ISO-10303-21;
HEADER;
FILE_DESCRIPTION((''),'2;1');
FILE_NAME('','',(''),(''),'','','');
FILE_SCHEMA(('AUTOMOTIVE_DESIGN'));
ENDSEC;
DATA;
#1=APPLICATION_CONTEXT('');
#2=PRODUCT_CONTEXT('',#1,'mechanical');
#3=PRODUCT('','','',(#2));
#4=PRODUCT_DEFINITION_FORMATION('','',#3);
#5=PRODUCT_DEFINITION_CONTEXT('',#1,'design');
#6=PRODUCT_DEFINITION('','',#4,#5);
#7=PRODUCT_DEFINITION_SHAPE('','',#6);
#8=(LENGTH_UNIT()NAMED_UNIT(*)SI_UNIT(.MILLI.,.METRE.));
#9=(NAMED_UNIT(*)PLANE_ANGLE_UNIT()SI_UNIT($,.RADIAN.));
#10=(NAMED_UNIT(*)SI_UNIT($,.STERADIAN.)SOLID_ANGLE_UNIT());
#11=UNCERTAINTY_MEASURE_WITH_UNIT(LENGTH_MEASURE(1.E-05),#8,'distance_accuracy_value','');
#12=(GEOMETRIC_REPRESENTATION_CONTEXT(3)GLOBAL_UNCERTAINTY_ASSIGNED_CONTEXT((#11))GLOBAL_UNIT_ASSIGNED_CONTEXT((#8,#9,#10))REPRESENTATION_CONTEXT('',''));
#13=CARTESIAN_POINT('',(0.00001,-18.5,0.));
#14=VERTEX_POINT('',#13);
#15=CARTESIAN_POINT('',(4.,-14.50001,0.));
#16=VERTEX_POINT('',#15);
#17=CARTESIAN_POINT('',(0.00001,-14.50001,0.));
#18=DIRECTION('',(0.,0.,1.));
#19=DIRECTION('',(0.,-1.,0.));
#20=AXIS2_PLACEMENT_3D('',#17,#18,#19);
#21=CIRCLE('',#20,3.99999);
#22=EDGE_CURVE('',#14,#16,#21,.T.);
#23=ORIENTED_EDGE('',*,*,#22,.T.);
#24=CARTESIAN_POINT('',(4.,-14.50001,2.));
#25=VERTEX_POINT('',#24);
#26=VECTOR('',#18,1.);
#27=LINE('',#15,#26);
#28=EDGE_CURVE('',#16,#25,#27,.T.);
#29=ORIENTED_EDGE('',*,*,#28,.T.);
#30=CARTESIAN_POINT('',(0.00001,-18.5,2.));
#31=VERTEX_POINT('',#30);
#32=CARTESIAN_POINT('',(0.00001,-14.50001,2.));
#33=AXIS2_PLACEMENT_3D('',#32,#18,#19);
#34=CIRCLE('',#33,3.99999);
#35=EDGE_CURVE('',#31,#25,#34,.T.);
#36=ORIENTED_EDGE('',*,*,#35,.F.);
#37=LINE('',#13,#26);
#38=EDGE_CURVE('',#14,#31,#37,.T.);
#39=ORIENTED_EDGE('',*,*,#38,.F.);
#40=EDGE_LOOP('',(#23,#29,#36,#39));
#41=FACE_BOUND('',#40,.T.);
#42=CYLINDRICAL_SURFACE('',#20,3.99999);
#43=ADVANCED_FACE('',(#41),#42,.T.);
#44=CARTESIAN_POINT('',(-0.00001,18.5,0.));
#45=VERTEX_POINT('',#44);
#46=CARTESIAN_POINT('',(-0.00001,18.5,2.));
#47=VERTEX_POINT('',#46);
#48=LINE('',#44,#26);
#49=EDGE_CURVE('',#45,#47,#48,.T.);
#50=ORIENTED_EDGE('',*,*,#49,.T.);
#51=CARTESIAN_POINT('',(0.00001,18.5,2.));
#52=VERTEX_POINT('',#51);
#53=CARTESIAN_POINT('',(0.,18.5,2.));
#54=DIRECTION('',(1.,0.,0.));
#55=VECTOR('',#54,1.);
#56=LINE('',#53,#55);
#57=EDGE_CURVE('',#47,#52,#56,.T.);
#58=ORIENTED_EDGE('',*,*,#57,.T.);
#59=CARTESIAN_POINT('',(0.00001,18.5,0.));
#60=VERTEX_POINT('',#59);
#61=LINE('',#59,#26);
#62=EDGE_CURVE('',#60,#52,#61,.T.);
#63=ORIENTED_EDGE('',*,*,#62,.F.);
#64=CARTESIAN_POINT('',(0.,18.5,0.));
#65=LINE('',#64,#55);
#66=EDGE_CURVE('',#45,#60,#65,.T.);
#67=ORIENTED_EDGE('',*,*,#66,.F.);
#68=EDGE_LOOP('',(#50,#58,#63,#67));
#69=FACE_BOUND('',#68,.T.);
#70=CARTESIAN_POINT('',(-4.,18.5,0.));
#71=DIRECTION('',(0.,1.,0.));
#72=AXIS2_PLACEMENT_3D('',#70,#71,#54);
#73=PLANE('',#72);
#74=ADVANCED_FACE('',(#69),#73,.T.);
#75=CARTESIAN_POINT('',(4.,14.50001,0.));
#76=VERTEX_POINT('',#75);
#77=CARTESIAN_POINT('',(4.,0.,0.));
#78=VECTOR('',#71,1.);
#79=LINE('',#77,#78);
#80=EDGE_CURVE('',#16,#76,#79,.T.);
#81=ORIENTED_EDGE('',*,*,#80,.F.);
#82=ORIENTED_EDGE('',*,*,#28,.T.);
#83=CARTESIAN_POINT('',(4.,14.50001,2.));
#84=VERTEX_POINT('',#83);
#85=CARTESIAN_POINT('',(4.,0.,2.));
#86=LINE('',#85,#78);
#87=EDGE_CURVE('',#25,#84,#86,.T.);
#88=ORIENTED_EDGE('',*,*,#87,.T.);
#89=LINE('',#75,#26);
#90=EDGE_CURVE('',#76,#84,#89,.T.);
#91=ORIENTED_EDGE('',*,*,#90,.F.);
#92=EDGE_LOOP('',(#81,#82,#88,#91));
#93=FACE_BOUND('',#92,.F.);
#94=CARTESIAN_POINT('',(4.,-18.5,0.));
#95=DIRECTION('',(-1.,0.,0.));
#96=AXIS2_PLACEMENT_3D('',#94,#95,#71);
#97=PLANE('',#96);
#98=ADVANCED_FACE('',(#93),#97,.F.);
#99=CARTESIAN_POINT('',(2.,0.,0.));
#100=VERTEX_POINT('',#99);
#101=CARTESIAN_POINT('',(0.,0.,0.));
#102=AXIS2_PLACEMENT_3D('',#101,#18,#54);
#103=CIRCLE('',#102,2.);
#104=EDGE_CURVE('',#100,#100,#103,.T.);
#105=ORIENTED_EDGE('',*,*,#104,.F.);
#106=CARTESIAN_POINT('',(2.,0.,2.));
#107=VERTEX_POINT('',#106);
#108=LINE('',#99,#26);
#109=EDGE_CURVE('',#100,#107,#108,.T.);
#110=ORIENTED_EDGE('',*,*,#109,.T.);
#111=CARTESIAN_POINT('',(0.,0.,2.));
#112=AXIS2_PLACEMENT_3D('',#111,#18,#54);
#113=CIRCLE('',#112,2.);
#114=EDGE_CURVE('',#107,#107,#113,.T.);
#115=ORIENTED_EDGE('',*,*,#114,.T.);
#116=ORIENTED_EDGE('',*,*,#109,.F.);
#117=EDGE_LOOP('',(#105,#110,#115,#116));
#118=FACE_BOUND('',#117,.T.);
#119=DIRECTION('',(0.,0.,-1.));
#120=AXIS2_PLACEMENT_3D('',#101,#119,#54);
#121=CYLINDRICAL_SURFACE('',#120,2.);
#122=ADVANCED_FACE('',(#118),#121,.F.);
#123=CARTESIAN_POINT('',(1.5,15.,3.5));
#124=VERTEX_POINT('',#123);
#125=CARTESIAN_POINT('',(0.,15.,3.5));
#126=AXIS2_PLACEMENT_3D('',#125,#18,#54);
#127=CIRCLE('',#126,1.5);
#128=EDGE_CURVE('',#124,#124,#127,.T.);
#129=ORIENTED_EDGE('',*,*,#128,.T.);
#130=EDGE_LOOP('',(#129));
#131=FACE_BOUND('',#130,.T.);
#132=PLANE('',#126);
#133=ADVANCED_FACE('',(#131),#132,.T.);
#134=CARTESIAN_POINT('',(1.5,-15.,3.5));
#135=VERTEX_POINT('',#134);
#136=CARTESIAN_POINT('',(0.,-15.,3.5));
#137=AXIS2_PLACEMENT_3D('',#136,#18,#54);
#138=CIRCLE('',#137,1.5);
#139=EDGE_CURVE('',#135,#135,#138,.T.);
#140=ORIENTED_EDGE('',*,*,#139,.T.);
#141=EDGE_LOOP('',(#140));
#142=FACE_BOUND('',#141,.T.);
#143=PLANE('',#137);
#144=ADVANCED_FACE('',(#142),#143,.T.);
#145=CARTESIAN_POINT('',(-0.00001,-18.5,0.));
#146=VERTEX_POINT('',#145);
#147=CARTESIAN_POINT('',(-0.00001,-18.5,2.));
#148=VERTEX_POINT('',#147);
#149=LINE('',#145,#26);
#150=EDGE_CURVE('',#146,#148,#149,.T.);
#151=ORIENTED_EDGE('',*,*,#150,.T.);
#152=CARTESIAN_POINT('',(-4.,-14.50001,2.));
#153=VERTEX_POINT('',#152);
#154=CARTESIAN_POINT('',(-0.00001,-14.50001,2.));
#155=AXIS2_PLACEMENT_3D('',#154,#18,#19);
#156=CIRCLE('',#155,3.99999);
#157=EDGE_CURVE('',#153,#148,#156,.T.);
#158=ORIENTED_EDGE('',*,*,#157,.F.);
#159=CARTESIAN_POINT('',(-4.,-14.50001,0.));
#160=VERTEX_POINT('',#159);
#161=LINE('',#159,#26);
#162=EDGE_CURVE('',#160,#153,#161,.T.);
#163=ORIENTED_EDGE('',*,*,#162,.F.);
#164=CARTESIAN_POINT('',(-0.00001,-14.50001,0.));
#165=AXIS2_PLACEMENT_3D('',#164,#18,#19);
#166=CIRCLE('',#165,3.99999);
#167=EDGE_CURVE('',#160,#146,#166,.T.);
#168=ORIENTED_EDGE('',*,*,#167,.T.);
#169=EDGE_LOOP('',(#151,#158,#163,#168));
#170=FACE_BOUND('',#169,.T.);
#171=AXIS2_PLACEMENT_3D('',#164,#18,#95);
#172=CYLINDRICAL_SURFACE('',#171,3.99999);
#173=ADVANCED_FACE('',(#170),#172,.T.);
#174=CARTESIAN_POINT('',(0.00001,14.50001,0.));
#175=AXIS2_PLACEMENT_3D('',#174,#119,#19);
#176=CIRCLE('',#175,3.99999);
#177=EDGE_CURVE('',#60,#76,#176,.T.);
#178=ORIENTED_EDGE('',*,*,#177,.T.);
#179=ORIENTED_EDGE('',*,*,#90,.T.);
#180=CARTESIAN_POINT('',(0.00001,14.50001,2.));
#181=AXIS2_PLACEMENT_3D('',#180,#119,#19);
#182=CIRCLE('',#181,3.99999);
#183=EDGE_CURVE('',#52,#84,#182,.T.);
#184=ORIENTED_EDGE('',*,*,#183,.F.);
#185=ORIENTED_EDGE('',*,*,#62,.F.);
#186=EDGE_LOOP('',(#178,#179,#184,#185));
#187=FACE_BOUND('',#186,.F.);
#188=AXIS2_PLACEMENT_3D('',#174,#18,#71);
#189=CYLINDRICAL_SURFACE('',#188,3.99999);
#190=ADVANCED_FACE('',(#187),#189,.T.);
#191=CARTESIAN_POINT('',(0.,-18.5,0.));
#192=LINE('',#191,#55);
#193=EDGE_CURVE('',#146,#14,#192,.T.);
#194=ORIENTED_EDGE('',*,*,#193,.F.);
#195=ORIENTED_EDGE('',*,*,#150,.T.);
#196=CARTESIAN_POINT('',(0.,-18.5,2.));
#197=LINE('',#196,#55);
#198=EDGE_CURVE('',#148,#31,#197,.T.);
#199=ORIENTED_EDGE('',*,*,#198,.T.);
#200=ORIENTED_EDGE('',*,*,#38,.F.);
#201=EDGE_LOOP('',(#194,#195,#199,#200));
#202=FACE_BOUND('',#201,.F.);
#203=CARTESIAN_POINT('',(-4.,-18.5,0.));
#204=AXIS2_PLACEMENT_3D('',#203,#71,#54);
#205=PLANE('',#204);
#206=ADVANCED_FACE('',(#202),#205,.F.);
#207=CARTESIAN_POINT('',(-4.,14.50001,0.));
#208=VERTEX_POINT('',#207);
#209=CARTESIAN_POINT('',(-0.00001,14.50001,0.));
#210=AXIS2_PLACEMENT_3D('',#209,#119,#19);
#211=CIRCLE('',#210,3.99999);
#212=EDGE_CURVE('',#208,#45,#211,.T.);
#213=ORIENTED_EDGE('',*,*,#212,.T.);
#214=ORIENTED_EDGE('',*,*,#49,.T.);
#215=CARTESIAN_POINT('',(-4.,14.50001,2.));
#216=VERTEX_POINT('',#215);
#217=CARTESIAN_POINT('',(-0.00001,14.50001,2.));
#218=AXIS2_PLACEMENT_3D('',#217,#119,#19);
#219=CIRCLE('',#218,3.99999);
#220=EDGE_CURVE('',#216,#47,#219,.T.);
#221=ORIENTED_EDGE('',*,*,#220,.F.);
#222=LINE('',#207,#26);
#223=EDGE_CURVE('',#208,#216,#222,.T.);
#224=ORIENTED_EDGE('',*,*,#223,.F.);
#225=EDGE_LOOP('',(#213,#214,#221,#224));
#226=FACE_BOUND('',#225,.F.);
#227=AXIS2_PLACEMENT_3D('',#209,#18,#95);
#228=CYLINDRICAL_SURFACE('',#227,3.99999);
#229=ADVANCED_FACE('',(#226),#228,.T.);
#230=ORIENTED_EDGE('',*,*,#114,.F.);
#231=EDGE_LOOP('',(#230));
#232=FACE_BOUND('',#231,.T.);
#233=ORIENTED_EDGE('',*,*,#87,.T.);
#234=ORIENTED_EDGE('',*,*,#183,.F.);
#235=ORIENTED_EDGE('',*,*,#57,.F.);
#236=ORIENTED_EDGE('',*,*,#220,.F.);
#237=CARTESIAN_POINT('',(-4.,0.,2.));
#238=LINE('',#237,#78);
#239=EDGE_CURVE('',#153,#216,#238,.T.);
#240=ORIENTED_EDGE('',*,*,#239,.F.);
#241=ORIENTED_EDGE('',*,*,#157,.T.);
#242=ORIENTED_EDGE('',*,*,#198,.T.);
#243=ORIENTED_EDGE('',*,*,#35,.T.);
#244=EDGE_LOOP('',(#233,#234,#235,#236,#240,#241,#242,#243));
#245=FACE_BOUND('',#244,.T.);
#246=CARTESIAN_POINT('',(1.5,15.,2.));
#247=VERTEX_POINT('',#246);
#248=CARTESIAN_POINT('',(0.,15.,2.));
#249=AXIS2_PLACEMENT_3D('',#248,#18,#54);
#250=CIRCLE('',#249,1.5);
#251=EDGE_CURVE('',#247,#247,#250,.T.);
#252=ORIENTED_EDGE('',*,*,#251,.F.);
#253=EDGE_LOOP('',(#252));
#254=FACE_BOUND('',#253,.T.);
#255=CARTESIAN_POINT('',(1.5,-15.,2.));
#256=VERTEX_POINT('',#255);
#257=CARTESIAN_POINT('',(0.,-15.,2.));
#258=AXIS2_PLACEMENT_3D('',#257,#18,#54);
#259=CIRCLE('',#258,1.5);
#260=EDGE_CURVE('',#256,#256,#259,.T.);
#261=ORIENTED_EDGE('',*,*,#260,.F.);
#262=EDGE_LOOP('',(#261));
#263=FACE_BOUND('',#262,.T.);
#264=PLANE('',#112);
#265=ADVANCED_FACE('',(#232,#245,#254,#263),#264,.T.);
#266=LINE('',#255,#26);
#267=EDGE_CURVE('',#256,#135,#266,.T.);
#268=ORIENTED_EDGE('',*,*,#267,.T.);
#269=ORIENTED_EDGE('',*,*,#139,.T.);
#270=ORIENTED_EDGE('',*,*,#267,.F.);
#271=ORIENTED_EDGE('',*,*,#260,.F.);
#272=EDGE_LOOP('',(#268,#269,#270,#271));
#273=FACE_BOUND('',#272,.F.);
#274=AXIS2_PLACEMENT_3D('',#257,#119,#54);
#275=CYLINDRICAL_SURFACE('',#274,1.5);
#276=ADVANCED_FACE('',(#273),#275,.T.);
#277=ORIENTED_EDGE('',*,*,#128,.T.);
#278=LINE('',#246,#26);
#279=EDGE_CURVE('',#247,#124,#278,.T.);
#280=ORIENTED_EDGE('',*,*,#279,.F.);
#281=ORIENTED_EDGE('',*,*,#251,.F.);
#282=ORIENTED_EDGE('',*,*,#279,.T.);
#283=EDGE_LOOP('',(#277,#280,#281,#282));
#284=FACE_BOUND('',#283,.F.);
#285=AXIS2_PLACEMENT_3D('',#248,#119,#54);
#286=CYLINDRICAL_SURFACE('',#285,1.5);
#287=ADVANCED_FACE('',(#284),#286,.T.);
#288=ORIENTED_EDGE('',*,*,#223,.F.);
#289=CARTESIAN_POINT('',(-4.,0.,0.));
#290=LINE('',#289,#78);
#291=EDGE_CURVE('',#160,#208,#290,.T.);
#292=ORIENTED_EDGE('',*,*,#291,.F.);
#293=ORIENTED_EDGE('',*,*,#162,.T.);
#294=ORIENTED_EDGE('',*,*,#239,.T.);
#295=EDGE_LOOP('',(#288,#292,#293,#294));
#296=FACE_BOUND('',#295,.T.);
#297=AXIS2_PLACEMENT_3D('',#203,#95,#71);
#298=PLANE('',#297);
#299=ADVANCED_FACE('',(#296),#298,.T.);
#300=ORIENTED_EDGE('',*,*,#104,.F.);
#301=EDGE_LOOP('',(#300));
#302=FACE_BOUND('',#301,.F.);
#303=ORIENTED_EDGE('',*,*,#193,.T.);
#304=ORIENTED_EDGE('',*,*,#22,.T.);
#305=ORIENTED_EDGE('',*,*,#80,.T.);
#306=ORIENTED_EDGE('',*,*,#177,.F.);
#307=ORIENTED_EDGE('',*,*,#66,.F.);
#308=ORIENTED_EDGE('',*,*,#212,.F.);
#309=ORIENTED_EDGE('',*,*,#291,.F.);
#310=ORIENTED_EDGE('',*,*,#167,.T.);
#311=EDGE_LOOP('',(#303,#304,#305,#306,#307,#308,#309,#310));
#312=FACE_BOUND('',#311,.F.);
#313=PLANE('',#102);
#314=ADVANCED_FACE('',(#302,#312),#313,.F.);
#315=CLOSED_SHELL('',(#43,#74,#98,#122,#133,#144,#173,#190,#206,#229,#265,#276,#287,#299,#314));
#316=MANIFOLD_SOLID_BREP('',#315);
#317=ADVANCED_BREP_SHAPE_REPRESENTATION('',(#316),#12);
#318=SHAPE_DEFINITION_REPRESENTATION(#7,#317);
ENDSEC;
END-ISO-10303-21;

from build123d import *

# Parameters (mm, degrees)
F0_W     = 8
F0_H     = 37
F0_R     = 2
F1_DEPTH = 2
F2_R     = 1.5
F3_DEPTH = 1.5
F4_R     = 3.99999


# Not quite as in the source:
# - a fillet or chamfer is up to 0.001 mm smaller than in the source, because OpenCascade refuses the exact size


with BuildPart() as f1:
    # F0 (on Top) → F1 (new body)
    with BuildSketch(Plane.XY):
        Rectangle(F0_W, F0_H)
        Circle(F0_R, mode=Mode.SUBTRACT)
    extrude(amount=F1_DEPTH)

    # F2 (on face) → F3 (join)
    with BuildSketch(Plane.XY.offset(2)):
        with Locations((0, 15)):
            Circle(F2_R)
        with Locations((0, -15)):
            Circle(F2_R)
    extrude(amount=F3_DEPTH)

    # F4 (radius 4 in the source; OpenCascade refuses exactly that, so slightly less here)
    f4_edges = [f1.edges().sort_by_distance(p)[0] for p in [
        (-4, 18.5, 1),
        (4, 18.5, 1),
        (4, -18.5, 1),
        (-4, -18.5, 1),
    ]]
    fillet(f4_edges, radius=F4_R)


solid = f1.part
